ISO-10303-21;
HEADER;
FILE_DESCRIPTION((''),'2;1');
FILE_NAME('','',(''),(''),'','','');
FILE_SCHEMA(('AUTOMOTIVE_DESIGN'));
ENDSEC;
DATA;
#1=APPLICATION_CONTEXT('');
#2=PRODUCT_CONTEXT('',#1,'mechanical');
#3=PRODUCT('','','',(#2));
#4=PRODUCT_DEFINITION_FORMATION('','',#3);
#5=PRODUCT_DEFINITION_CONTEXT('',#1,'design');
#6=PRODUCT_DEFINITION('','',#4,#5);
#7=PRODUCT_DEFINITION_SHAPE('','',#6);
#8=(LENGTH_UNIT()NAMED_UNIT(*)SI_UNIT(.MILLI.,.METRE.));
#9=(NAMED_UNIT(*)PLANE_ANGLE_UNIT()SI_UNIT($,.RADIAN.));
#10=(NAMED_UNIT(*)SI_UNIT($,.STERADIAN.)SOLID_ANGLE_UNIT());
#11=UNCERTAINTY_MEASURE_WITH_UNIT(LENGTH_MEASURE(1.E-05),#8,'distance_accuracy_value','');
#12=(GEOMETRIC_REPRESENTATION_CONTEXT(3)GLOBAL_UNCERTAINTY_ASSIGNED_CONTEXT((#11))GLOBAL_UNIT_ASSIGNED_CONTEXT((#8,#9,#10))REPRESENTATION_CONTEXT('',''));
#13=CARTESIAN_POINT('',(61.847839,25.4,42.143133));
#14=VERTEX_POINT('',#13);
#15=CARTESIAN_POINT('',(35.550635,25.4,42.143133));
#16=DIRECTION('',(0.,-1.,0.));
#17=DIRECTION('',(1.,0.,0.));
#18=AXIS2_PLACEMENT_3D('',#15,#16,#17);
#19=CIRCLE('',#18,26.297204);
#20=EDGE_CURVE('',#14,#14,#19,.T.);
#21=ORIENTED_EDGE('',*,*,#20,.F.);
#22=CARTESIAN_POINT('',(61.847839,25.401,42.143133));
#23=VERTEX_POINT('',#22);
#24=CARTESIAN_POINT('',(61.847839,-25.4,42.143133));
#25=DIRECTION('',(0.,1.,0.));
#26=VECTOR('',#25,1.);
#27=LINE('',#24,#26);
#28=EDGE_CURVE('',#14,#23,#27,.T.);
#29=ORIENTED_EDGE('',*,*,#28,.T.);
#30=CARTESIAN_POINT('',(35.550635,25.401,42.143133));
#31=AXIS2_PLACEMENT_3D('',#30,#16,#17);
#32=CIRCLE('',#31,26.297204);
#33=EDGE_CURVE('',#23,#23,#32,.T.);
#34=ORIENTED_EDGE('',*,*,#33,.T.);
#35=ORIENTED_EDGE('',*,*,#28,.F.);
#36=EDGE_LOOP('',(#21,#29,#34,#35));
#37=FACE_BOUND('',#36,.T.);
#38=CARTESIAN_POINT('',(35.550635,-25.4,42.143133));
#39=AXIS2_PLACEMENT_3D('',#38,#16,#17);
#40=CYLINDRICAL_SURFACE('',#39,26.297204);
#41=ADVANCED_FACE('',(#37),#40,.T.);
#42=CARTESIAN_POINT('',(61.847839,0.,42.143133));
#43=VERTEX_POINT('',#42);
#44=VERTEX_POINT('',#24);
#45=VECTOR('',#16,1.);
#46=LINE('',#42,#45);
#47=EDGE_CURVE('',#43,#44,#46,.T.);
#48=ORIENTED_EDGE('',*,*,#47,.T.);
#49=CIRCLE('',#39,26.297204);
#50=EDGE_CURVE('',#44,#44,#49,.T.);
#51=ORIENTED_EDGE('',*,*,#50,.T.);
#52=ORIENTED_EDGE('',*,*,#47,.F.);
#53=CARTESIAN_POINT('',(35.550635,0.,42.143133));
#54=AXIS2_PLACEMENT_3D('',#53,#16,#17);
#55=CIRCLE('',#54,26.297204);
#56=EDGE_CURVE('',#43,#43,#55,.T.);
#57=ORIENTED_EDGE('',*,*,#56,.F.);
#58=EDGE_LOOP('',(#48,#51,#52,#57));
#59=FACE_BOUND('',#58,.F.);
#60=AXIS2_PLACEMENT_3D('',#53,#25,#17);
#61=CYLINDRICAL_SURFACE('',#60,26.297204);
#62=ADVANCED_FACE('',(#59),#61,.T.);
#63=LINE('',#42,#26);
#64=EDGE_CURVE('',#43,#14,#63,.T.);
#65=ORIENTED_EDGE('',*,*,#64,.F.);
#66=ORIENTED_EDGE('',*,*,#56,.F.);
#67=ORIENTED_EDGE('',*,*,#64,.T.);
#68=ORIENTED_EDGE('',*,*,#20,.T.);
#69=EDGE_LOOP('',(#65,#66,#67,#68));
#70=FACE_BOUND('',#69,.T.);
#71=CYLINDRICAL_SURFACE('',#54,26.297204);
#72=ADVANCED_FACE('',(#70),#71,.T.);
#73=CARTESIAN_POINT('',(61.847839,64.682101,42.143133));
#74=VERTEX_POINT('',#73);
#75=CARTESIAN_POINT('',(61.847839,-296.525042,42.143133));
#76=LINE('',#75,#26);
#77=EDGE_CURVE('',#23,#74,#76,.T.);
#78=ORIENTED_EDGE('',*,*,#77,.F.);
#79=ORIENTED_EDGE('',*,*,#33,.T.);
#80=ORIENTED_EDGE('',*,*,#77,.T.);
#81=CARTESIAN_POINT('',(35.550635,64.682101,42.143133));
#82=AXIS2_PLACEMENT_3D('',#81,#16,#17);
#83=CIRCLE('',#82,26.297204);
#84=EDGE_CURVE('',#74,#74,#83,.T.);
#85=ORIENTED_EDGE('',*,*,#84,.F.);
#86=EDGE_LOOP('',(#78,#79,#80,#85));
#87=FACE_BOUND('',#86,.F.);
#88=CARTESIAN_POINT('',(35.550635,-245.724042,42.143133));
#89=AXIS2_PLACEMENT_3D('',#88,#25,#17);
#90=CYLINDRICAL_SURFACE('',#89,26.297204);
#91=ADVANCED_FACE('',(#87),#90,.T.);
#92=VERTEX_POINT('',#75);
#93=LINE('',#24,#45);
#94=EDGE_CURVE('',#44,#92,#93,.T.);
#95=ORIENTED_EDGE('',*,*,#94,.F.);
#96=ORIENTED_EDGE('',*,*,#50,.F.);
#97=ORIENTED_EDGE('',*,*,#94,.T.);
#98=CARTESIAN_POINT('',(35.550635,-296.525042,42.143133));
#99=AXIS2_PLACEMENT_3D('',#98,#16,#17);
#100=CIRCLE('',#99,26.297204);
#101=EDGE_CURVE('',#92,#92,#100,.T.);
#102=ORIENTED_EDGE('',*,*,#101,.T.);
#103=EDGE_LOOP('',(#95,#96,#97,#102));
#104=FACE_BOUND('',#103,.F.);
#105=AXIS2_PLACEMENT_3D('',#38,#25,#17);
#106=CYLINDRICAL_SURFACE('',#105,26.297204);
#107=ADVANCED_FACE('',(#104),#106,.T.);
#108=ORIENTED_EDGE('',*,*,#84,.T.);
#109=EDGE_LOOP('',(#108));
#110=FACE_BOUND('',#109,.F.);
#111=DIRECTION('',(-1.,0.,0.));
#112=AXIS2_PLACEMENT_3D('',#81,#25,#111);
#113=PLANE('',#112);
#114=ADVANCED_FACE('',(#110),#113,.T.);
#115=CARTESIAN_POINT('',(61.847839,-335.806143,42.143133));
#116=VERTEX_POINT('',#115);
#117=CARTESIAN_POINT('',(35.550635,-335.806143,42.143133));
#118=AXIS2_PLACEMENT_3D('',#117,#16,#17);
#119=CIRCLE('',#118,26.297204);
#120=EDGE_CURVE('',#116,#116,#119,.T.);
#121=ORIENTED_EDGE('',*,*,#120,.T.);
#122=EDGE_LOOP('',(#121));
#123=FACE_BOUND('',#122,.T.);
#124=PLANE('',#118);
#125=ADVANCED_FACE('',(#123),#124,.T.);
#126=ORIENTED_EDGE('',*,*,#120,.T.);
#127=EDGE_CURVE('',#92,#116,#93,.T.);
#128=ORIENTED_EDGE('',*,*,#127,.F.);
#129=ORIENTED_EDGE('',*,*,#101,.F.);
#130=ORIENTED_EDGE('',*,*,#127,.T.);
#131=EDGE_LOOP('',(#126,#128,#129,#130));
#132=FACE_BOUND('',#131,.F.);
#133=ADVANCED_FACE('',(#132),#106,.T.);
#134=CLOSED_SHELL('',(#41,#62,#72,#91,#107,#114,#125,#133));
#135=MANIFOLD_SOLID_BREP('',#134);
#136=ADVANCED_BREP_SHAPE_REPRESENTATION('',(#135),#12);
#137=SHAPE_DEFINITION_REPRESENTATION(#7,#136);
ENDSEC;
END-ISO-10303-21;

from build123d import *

# Parameters (mm, degrees)
F0_R          = 26.2972038965
F0_R_2        = 21.7596703079
F1_DEPTH      = 25.4
F2_DEPTH      = 25.4
F3_DEPTH      = 50.801
F3_DEPTH_BACK = 310.4061427


# Not quite as in the source:
# - an extrude ends at something that could not be found from the text; its depth is read off the source's solid
# - a feature of the source that left no trace in its solid (it failed there, or was rolled back) is left out
# - a pattern or mirror of a feature is missing from the dataset's text; its kind, count and spacing are read off the source's solid


with BuildPart() as f1:
    # F0 (on Front) → F1 (new body)
    with BuildSketch(Plane.XZ):
        with Locations((35.550635308, 42.1431325376)):
            Circle(F0_R)
        with Locations((35.550635308, 42.1431325376)):
            Circle(F0_R_2, mode=Mode.SUBTRACT)
        with Locations((35.550635308, 42.1431325376)):
            Circle(F0_R_2)
    extrude(amount=-F1_DEPTH)

    # F2 (add): a face of the model
    f2_faces = [f1.faces().sort_by_distance(p)[0] for p in [
        (35.550635308, 0, 42.1431325376),
    ]]
    extrude(f2_faces, amount=F2_DEPTH)

    # F3 (add, two sides): a face of the model
    f3_faces = [f1.faces().sort_by_distance(p)[0] for p in [
        (35.550635308, -25.4, 42.1431325376),
    ]]
    f3 = extrude(f3_faces, amount=-F3_DEPTH) + extrude(f3_faces, amount=F3_DEPTH_BACK)

    # F3_copies: F3 across plane
    add(f3.mirror(Plane.ZX.offset(-135.562021)))


solid = f1.part
